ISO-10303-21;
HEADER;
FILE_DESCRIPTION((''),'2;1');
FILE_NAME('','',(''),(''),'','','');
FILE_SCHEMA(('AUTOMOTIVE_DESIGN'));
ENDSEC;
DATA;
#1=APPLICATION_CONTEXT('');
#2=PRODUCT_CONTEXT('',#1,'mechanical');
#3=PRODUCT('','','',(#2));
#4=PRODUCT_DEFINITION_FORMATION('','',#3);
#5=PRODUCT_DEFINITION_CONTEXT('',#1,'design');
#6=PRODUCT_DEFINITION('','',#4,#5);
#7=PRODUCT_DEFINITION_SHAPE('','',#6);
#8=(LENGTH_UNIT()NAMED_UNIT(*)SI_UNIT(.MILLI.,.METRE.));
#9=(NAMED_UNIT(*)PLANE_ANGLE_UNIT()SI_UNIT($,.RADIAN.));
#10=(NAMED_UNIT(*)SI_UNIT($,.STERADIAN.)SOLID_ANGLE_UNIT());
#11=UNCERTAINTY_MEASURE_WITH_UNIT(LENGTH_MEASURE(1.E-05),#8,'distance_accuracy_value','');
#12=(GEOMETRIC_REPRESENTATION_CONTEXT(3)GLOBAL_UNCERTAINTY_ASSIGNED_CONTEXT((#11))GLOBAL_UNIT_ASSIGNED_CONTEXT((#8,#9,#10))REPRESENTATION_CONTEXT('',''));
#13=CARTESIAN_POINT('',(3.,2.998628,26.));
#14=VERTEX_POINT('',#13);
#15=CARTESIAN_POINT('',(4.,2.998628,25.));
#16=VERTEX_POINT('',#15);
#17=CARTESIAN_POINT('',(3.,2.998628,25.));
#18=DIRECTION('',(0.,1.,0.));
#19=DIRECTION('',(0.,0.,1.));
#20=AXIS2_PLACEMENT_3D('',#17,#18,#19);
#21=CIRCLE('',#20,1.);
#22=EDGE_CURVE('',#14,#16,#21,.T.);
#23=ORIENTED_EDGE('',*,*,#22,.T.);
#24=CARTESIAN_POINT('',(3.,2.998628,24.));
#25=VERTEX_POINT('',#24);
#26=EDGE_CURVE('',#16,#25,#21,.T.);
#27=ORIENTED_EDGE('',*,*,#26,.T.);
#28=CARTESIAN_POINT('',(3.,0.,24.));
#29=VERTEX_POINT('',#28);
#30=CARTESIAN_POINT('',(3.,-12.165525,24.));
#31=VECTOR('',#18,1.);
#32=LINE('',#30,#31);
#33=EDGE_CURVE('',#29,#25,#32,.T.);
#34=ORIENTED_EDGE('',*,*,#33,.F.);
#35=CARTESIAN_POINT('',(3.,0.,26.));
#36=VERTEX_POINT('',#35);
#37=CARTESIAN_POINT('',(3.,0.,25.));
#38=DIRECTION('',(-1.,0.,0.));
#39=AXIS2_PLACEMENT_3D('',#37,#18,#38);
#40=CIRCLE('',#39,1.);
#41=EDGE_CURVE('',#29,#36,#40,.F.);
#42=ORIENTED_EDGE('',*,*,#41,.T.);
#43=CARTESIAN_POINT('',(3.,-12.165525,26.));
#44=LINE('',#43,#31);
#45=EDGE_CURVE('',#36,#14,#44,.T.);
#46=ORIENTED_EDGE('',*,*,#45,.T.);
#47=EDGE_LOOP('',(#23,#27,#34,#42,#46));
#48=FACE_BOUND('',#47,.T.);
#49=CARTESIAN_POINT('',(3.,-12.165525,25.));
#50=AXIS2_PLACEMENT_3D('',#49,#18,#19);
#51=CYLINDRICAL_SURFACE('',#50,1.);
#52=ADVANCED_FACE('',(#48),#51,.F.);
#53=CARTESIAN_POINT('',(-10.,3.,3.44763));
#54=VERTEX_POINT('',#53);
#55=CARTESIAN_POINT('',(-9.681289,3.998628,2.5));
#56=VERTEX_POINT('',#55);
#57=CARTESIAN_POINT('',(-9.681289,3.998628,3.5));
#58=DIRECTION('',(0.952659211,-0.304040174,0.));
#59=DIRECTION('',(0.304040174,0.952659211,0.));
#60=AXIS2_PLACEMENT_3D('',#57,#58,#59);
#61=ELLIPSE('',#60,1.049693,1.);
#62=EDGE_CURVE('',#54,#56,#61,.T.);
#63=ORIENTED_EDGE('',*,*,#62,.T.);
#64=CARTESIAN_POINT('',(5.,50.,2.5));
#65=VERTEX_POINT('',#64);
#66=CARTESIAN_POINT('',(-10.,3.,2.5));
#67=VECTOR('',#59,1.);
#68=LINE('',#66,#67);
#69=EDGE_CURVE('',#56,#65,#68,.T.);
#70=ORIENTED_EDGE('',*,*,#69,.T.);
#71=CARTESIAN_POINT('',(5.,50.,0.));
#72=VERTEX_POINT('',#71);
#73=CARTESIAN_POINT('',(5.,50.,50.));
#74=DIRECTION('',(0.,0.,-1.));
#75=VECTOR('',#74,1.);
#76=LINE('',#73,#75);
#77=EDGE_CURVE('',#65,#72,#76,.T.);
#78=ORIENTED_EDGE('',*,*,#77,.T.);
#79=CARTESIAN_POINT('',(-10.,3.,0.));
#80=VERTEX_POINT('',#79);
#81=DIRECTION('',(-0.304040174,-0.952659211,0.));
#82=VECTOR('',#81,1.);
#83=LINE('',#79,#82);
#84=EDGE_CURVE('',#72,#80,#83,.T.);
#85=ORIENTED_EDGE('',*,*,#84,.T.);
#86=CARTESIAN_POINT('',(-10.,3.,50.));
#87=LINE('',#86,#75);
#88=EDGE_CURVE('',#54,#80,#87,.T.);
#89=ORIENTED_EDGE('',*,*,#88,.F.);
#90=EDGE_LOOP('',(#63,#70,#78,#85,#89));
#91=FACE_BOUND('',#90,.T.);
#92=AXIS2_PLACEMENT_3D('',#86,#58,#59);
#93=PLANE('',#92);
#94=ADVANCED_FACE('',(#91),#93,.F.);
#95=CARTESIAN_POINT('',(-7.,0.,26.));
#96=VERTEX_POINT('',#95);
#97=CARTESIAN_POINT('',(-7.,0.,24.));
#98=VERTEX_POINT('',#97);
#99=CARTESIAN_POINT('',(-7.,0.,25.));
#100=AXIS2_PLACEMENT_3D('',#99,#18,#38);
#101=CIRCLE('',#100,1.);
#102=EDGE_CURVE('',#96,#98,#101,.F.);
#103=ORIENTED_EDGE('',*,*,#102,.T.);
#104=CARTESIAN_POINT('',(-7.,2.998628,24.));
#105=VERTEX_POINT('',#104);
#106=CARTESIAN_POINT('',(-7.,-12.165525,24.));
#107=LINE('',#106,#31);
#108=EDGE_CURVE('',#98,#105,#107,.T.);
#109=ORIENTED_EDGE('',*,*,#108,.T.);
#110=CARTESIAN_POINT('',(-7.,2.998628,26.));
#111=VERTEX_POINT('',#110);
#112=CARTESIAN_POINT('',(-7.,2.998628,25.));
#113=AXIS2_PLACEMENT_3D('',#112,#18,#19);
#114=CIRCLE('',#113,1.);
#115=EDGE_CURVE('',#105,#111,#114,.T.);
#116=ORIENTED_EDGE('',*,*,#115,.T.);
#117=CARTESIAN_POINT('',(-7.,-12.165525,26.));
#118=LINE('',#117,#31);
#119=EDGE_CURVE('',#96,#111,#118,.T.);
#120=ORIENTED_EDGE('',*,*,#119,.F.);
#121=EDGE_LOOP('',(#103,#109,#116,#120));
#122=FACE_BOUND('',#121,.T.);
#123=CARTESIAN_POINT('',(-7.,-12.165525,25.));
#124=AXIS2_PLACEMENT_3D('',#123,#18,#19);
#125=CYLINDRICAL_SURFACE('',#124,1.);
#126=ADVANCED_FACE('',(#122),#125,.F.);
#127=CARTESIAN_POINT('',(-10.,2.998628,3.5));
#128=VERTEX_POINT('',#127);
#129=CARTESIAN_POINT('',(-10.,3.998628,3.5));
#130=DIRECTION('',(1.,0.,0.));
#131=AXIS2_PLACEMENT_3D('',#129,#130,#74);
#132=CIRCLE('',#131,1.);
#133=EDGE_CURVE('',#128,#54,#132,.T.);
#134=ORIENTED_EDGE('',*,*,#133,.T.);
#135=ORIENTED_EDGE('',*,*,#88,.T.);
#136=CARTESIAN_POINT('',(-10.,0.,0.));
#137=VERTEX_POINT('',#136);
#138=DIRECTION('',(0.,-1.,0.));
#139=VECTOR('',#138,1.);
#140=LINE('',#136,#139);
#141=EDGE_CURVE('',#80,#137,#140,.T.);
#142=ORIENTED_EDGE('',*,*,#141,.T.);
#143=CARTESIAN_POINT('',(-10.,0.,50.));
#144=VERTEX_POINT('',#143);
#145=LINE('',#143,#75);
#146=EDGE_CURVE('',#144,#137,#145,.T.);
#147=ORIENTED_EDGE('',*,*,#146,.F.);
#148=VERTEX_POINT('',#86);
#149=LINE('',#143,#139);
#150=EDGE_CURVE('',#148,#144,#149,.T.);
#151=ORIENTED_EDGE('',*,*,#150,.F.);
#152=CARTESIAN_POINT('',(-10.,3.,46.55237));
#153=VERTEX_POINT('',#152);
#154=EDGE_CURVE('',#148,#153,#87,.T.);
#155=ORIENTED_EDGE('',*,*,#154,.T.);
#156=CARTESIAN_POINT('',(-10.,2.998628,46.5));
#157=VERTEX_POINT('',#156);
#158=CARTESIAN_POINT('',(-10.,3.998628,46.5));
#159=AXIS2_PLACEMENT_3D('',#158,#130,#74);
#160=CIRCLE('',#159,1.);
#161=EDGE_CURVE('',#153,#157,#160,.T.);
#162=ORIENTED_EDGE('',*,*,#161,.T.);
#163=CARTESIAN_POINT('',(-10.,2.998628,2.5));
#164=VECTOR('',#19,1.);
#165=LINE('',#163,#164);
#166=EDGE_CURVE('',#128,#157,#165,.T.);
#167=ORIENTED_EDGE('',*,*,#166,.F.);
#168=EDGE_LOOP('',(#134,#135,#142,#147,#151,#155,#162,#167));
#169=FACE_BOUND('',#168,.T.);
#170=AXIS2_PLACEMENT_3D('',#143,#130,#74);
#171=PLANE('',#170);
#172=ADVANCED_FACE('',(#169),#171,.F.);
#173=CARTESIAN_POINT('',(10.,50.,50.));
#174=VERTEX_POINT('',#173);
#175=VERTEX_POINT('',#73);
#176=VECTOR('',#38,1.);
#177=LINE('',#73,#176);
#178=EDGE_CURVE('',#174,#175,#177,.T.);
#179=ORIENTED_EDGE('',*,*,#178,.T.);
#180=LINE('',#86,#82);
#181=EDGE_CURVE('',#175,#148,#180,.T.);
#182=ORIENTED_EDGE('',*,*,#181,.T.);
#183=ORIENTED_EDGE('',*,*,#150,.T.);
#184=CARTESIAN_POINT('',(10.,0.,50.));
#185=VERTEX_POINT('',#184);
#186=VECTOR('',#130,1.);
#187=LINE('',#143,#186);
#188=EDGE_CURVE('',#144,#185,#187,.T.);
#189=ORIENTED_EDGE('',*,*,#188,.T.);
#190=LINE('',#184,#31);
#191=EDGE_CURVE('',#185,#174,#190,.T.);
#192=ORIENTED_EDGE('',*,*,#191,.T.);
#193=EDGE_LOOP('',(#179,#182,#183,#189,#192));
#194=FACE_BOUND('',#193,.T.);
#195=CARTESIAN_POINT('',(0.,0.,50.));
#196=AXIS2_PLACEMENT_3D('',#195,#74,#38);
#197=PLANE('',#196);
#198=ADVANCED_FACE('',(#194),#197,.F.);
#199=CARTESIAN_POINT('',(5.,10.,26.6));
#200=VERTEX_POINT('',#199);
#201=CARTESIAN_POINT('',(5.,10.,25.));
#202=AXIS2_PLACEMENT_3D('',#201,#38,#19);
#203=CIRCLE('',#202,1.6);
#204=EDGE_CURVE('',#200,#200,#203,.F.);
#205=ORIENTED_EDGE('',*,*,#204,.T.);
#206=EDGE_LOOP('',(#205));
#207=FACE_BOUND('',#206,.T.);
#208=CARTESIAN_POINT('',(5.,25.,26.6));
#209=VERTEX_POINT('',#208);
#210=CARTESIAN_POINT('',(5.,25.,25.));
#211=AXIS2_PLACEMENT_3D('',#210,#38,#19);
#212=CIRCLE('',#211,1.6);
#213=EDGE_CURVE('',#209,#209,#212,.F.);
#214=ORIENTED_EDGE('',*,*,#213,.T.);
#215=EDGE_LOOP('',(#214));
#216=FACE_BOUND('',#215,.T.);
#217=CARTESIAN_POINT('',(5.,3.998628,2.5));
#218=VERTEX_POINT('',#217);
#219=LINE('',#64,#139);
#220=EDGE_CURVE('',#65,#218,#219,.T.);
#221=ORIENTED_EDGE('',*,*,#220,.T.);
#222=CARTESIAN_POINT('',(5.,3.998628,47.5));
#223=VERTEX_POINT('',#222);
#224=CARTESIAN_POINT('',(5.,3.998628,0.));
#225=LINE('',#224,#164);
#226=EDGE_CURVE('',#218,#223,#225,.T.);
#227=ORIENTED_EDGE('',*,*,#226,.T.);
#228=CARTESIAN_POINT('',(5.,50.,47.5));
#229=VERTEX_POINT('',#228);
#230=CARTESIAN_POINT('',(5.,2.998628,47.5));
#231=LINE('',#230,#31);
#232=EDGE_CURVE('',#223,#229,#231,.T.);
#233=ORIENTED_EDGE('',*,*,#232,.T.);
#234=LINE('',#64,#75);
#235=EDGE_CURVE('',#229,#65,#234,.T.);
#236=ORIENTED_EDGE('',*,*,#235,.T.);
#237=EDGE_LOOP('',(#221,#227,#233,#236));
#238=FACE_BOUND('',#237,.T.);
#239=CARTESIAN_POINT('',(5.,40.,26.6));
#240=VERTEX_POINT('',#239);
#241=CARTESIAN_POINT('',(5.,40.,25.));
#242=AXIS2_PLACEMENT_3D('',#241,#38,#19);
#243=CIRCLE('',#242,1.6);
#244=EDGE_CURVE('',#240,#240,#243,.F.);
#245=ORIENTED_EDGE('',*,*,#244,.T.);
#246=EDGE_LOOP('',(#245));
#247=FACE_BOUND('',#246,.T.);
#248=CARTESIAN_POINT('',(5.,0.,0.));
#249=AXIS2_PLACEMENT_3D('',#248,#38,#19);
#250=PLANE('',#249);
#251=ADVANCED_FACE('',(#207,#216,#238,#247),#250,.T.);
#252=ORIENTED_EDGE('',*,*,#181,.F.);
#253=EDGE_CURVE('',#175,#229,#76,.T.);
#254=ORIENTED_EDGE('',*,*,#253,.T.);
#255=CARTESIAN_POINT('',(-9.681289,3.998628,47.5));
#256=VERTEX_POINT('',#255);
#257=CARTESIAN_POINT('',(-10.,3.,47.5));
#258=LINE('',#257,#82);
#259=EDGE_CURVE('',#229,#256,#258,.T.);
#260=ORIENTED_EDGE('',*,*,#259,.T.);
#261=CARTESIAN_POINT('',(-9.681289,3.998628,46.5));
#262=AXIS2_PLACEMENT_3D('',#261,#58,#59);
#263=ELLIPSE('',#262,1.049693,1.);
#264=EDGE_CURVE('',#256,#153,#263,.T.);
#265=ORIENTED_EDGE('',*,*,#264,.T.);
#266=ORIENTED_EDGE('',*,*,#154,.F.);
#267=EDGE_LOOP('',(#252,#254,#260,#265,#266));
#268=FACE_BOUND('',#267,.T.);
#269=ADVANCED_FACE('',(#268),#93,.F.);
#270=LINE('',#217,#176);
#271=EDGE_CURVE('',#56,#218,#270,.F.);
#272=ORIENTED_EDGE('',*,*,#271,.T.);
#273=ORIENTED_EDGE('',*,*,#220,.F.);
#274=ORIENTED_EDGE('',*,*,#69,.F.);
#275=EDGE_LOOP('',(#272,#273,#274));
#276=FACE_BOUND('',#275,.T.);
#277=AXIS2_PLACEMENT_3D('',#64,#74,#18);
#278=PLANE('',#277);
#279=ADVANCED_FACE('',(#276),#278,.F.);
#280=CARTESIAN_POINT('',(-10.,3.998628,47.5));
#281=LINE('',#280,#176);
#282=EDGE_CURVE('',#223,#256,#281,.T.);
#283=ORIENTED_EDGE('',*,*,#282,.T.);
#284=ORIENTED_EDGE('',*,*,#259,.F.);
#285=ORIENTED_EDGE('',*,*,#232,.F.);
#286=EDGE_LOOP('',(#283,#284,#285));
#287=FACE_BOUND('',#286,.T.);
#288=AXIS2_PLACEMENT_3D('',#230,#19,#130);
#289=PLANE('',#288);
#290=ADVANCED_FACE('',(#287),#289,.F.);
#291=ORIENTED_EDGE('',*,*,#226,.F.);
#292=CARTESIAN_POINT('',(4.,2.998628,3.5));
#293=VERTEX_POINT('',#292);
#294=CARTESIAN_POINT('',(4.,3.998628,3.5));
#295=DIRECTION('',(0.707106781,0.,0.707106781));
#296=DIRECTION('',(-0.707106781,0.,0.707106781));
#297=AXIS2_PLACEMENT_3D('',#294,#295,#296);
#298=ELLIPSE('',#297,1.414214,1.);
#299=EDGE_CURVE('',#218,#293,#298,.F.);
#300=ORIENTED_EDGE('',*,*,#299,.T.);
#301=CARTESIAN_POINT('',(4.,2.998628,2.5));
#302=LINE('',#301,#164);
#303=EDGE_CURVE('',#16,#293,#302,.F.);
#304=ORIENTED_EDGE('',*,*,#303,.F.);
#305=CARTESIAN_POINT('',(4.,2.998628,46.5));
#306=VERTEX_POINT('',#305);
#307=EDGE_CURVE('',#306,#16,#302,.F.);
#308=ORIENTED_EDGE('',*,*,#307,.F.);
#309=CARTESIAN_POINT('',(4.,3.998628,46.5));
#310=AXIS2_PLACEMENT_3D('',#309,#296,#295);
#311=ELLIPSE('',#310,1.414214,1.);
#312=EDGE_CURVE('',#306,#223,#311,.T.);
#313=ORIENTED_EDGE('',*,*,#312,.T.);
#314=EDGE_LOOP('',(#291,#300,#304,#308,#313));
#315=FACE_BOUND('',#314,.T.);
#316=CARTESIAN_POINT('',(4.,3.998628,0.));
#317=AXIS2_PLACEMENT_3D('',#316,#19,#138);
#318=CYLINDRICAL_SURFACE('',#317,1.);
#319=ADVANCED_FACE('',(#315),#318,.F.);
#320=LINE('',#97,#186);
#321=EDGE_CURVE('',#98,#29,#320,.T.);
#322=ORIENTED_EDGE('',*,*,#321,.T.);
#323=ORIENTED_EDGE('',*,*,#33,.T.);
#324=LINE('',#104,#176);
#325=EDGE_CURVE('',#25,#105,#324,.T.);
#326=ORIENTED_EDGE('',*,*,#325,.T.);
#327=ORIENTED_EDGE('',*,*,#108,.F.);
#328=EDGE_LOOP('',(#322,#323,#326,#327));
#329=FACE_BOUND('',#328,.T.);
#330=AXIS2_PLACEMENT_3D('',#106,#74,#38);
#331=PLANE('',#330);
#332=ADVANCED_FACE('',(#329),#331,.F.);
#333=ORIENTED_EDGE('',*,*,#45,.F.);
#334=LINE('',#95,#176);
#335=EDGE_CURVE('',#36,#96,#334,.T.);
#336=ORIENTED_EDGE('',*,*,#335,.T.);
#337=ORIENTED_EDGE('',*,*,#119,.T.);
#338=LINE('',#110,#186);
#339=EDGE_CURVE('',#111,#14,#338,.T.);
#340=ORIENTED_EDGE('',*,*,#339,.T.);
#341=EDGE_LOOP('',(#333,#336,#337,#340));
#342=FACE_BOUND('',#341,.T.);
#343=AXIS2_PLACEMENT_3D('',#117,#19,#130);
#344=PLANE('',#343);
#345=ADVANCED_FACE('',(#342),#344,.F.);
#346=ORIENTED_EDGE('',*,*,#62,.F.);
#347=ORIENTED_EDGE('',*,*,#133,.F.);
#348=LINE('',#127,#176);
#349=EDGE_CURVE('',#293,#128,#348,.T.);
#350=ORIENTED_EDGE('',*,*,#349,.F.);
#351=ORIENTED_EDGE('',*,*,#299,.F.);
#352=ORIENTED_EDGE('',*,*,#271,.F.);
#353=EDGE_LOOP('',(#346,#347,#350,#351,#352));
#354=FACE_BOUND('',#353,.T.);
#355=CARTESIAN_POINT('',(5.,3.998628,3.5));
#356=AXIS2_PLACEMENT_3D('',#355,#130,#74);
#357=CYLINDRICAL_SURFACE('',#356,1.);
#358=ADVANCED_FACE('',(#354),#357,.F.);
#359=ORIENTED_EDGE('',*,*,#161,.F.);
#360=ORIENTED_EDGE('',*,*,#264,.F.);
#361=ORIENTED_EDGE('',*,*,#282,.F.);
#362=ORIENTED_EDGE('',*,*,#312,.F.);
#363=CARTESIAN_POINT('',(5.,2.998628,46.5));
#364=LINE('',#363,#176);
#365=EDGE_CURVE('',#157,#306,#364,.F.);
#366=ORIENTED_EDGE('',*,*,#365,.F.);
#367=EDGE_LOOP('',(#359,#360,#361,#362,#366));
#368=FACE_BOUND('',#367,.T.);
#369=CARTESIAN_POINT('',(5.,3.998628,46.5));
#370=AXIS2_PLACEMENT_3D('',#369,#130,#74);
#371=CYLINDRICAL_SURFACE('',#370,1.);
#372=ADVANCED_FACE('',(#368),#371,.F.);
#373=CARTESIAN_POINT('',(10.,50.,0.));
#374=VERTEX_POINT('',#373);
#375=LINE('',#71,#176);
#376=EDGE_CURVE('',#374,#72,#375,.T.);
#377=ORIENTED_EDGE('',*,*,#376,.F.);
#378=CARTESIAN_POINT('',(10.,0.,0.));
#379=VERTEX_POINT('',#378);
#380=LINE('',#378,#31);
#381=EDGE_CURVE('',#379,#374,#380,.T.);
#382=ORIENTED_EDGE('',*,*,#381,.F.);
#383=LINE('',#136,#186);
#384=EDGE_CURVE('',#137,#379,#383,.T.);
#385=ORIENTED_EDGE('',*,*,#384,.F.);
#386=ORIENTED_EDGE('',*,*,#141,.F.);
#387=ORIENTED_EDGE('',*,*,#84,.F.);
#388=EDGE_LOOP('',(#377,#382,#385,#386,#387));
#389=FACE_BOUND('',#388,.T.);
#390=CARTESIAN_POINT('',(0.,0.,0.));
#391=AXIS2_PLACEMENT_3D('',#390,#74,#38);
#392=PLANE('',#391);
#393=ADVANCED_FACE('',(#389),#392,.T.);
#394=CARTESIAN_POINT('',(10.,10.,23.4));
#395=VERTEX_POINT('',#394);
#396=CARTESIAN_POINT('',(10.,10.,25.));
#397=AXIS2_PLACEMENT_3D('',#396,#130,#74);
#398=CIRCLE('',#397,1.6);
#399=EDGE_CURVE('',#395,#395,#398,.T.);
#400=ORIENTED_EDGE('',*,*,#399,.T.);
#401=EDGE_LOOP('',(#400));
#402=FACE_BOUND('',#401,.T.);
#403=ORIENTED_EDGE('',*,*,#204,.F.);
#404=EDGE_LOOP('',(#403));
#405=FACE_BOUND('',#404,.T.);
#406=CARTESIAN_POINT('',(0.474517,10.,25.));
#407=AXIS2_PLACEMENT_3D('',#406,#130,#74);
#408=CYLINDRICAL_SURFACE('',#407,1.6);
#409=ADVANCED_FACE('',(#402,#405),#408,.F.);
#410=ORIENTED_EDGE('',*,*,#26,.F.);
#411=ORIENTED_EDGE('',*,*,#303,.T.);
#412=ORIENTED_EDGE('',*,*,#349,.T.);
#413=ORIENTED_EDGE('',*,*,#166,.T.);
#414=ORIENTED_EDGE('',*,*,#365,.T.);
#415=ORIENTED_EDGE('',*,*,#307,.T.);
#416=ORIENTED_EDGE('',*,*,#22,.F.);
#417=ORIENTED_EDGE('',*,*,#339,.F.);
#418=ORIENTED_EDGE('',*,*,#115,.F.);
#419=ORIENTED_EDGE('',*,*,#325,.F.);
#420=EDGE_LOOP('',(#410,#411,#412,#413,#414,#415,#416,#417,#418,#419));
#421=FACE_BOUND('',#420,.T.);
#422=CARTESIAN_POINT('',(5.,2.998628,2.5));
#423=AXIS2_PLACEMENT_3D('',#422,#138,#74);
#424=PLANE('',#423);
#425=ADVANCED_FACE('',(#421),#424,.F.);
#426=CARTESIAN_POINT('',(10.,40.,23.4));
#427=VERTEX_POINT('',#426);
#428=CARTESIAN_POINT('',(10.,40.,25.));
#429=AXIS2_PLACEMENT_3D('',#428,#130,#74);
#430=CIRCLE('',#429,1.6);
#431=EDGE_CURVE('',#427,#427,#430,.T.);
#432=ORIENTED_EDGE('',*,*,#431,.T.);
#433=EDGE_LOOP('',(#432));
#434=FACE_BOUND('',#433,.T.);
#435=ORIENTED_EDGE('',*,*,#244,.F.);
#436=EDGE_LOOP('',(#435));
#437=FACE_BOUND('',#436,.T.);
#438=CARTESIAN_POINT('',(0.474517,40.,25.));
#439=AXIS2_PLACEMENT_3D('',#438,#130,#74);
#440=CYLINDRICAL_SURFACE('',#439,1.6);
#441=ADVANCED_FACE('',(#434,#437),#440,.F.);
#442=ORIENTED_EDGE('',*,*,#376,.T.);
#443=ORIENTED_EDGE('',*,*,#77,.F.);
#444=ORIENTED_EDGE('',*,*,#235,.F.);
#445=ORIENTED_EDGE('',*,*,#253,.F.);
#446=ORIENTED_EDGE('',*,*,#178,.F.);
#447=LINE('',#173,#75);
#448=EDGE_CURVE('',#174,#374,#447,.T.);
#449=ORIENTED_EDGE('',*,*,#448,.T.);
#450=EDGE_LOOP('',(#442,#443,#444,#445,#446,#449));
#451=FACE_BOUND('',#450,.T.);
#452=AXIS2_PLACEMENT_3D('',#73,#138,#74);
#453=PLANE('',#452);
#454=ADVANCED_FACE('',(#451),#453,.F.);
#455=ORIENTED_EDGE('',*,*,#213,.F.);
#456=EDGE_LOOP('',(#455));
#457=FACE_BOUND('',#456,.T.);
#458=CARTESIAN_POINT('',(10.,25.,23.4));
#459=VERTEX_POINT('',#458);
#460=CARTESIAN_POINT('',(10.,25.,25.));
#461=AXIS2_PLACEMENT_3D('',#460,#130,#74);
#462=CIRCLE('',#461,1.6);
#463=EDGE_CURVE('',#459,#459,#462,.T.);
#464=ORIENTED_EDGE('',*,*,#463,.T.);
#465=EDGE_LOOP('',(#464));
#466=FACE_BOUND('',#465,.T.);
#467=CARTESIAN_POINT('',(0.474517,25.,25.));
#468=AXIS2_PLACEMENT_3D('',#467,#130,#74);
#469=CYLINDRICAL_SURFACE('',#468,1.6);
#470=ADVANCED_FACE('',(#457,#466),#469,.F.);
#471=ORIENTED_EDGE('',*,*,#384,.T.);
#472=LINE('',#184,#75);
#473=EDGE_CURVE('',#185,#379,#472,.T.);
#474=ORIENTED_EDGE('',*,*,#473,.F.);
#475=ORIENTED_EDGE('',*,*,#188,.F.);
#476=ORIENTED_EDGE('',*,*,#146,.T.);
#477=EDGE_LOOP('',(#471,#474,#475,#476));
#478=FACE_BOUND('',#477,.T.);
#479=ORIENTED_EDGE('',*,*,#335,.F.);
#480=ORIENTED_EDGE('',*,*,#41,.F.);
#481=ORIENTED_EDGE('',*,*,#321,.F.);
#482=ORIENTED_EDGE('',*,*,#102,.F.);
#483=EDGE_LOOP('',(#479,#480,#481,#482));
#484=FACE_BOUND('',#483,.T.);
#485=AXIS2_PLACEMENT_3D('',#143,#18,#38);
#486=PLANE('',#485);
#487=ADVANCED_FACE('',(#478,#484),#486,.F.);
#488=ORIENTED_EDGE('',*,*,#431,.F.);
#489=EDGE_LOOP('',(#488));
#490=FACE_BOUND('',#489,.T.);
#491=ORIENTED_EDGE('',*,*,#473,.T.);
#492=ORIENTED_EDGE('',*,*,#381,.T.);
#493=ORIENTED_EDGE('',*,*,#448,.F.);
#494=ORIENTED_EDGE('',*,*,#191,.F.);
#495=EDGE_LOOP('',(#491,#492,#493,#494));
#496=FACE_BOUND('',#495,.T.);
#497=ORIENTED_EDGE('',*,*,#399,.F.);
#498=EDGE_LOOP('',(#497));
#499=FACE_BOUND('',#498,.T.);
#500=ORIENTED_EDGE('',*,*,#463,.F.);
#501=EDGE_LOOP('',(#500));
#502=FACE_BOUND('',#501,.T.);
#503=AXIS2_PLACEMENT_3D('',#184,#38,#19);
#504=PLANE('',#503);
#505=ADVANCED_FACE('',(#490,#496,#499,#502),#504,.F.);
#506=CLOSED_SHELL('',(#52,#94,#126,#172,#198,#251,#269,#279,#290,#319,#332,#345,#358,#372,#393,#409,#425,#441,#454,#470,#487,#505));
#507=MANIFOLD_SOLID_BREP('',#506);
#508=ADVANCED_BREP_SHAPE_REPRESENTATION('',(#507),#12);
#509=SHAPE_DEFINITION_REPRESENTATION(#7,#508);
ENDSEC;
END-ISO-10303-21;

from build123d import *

# Parameters (mm, degrees)
BOSS_EXTRUDE1_DEPTH = 50
SKETCH4_W           = 45
SKETCH4_H           = 47.001372255
CUT_EXTRUDE2_DEPTH  = 15
SKETCH6_R           = 1.6
CUT_EXTRUDE4_DEPTH  = 5
CUT_EXTRUDE5_DEPTH  = 2.998627745
FILLET1_R           = 1


with BuildPart() as part:
    # Sketch1 → Boss-Extrude1 (new body)
    with BuildSketch(Plane.XY):
        Polygon((-10, 0), (10, 0), (10, 50), (5, 50), (-10, 3), align=None)
    extrude(amount=BOSS_EXTRUDE1_DEPTH)

    # Sketch4 → Cut-Extrude2 (cut)
    with BuildSketch(Plane.ZY.offset(10)):
        with Locations((25, 26.499313873)):
            Rectangle(SKETCH4_W, SKETCH4_H)
    extrude(amount=-CUT_EXTRUDE2_DEPTH, mode=Mode.SUBTRACT)

    # Sketch6 → Cut-Extrude4 (cut)
    with BuildSketch(Plane(origin=(10, 0, 0), x_dir=(0, 0, -1), z_dir=(1, 0, 0))):
        with Locations((-25, 25)):
            Circle(SKETCH6_R)
        with Locations((-25, 10)):
            Circle(SKETCH6_R)
        with Locations((-25, 40)):
            Circle(SKETCH6_R)
    extrude(amount=-CUT_EXTRUDE4_DEPTH, mode=Mode.SUBTRACT)

    # Sketch7 → Cut-Extrude5 (cut)
    with BuildSketch(Plane(origin=(0, 2.998627745, 0), x_dir=(1, 0, 0), z_dir=(0, 1, 0))):
        with BuildLine():
            Line((-7, -24), (3, -24))
            ThreePointArc((3, -24), (4, -25), (3, -26))
            Line((3, -26), (-7, -26))
            ThreePointArc((-7, -26), (-8, -25), (-7, -24))
        make_face()
    extrude(amount=-CUT_EXTRUDE5_DEPTH, mode=Mode.SUBTRACT)

    # Fillet1
    fillet1_edges = [part.edges().sort_by_distance(p)[0] for p in [
        (5, 2.998627745, 25),
        (-2.5, 2.998627745, 47.5),
        (-2.5, 2.998627745, 2.5),
    ]]
    fillet(fillet1_edges, radius=FILLET1_R - 0.0001)  # a hair under: the kernel refuses the full size


solid = part.part
